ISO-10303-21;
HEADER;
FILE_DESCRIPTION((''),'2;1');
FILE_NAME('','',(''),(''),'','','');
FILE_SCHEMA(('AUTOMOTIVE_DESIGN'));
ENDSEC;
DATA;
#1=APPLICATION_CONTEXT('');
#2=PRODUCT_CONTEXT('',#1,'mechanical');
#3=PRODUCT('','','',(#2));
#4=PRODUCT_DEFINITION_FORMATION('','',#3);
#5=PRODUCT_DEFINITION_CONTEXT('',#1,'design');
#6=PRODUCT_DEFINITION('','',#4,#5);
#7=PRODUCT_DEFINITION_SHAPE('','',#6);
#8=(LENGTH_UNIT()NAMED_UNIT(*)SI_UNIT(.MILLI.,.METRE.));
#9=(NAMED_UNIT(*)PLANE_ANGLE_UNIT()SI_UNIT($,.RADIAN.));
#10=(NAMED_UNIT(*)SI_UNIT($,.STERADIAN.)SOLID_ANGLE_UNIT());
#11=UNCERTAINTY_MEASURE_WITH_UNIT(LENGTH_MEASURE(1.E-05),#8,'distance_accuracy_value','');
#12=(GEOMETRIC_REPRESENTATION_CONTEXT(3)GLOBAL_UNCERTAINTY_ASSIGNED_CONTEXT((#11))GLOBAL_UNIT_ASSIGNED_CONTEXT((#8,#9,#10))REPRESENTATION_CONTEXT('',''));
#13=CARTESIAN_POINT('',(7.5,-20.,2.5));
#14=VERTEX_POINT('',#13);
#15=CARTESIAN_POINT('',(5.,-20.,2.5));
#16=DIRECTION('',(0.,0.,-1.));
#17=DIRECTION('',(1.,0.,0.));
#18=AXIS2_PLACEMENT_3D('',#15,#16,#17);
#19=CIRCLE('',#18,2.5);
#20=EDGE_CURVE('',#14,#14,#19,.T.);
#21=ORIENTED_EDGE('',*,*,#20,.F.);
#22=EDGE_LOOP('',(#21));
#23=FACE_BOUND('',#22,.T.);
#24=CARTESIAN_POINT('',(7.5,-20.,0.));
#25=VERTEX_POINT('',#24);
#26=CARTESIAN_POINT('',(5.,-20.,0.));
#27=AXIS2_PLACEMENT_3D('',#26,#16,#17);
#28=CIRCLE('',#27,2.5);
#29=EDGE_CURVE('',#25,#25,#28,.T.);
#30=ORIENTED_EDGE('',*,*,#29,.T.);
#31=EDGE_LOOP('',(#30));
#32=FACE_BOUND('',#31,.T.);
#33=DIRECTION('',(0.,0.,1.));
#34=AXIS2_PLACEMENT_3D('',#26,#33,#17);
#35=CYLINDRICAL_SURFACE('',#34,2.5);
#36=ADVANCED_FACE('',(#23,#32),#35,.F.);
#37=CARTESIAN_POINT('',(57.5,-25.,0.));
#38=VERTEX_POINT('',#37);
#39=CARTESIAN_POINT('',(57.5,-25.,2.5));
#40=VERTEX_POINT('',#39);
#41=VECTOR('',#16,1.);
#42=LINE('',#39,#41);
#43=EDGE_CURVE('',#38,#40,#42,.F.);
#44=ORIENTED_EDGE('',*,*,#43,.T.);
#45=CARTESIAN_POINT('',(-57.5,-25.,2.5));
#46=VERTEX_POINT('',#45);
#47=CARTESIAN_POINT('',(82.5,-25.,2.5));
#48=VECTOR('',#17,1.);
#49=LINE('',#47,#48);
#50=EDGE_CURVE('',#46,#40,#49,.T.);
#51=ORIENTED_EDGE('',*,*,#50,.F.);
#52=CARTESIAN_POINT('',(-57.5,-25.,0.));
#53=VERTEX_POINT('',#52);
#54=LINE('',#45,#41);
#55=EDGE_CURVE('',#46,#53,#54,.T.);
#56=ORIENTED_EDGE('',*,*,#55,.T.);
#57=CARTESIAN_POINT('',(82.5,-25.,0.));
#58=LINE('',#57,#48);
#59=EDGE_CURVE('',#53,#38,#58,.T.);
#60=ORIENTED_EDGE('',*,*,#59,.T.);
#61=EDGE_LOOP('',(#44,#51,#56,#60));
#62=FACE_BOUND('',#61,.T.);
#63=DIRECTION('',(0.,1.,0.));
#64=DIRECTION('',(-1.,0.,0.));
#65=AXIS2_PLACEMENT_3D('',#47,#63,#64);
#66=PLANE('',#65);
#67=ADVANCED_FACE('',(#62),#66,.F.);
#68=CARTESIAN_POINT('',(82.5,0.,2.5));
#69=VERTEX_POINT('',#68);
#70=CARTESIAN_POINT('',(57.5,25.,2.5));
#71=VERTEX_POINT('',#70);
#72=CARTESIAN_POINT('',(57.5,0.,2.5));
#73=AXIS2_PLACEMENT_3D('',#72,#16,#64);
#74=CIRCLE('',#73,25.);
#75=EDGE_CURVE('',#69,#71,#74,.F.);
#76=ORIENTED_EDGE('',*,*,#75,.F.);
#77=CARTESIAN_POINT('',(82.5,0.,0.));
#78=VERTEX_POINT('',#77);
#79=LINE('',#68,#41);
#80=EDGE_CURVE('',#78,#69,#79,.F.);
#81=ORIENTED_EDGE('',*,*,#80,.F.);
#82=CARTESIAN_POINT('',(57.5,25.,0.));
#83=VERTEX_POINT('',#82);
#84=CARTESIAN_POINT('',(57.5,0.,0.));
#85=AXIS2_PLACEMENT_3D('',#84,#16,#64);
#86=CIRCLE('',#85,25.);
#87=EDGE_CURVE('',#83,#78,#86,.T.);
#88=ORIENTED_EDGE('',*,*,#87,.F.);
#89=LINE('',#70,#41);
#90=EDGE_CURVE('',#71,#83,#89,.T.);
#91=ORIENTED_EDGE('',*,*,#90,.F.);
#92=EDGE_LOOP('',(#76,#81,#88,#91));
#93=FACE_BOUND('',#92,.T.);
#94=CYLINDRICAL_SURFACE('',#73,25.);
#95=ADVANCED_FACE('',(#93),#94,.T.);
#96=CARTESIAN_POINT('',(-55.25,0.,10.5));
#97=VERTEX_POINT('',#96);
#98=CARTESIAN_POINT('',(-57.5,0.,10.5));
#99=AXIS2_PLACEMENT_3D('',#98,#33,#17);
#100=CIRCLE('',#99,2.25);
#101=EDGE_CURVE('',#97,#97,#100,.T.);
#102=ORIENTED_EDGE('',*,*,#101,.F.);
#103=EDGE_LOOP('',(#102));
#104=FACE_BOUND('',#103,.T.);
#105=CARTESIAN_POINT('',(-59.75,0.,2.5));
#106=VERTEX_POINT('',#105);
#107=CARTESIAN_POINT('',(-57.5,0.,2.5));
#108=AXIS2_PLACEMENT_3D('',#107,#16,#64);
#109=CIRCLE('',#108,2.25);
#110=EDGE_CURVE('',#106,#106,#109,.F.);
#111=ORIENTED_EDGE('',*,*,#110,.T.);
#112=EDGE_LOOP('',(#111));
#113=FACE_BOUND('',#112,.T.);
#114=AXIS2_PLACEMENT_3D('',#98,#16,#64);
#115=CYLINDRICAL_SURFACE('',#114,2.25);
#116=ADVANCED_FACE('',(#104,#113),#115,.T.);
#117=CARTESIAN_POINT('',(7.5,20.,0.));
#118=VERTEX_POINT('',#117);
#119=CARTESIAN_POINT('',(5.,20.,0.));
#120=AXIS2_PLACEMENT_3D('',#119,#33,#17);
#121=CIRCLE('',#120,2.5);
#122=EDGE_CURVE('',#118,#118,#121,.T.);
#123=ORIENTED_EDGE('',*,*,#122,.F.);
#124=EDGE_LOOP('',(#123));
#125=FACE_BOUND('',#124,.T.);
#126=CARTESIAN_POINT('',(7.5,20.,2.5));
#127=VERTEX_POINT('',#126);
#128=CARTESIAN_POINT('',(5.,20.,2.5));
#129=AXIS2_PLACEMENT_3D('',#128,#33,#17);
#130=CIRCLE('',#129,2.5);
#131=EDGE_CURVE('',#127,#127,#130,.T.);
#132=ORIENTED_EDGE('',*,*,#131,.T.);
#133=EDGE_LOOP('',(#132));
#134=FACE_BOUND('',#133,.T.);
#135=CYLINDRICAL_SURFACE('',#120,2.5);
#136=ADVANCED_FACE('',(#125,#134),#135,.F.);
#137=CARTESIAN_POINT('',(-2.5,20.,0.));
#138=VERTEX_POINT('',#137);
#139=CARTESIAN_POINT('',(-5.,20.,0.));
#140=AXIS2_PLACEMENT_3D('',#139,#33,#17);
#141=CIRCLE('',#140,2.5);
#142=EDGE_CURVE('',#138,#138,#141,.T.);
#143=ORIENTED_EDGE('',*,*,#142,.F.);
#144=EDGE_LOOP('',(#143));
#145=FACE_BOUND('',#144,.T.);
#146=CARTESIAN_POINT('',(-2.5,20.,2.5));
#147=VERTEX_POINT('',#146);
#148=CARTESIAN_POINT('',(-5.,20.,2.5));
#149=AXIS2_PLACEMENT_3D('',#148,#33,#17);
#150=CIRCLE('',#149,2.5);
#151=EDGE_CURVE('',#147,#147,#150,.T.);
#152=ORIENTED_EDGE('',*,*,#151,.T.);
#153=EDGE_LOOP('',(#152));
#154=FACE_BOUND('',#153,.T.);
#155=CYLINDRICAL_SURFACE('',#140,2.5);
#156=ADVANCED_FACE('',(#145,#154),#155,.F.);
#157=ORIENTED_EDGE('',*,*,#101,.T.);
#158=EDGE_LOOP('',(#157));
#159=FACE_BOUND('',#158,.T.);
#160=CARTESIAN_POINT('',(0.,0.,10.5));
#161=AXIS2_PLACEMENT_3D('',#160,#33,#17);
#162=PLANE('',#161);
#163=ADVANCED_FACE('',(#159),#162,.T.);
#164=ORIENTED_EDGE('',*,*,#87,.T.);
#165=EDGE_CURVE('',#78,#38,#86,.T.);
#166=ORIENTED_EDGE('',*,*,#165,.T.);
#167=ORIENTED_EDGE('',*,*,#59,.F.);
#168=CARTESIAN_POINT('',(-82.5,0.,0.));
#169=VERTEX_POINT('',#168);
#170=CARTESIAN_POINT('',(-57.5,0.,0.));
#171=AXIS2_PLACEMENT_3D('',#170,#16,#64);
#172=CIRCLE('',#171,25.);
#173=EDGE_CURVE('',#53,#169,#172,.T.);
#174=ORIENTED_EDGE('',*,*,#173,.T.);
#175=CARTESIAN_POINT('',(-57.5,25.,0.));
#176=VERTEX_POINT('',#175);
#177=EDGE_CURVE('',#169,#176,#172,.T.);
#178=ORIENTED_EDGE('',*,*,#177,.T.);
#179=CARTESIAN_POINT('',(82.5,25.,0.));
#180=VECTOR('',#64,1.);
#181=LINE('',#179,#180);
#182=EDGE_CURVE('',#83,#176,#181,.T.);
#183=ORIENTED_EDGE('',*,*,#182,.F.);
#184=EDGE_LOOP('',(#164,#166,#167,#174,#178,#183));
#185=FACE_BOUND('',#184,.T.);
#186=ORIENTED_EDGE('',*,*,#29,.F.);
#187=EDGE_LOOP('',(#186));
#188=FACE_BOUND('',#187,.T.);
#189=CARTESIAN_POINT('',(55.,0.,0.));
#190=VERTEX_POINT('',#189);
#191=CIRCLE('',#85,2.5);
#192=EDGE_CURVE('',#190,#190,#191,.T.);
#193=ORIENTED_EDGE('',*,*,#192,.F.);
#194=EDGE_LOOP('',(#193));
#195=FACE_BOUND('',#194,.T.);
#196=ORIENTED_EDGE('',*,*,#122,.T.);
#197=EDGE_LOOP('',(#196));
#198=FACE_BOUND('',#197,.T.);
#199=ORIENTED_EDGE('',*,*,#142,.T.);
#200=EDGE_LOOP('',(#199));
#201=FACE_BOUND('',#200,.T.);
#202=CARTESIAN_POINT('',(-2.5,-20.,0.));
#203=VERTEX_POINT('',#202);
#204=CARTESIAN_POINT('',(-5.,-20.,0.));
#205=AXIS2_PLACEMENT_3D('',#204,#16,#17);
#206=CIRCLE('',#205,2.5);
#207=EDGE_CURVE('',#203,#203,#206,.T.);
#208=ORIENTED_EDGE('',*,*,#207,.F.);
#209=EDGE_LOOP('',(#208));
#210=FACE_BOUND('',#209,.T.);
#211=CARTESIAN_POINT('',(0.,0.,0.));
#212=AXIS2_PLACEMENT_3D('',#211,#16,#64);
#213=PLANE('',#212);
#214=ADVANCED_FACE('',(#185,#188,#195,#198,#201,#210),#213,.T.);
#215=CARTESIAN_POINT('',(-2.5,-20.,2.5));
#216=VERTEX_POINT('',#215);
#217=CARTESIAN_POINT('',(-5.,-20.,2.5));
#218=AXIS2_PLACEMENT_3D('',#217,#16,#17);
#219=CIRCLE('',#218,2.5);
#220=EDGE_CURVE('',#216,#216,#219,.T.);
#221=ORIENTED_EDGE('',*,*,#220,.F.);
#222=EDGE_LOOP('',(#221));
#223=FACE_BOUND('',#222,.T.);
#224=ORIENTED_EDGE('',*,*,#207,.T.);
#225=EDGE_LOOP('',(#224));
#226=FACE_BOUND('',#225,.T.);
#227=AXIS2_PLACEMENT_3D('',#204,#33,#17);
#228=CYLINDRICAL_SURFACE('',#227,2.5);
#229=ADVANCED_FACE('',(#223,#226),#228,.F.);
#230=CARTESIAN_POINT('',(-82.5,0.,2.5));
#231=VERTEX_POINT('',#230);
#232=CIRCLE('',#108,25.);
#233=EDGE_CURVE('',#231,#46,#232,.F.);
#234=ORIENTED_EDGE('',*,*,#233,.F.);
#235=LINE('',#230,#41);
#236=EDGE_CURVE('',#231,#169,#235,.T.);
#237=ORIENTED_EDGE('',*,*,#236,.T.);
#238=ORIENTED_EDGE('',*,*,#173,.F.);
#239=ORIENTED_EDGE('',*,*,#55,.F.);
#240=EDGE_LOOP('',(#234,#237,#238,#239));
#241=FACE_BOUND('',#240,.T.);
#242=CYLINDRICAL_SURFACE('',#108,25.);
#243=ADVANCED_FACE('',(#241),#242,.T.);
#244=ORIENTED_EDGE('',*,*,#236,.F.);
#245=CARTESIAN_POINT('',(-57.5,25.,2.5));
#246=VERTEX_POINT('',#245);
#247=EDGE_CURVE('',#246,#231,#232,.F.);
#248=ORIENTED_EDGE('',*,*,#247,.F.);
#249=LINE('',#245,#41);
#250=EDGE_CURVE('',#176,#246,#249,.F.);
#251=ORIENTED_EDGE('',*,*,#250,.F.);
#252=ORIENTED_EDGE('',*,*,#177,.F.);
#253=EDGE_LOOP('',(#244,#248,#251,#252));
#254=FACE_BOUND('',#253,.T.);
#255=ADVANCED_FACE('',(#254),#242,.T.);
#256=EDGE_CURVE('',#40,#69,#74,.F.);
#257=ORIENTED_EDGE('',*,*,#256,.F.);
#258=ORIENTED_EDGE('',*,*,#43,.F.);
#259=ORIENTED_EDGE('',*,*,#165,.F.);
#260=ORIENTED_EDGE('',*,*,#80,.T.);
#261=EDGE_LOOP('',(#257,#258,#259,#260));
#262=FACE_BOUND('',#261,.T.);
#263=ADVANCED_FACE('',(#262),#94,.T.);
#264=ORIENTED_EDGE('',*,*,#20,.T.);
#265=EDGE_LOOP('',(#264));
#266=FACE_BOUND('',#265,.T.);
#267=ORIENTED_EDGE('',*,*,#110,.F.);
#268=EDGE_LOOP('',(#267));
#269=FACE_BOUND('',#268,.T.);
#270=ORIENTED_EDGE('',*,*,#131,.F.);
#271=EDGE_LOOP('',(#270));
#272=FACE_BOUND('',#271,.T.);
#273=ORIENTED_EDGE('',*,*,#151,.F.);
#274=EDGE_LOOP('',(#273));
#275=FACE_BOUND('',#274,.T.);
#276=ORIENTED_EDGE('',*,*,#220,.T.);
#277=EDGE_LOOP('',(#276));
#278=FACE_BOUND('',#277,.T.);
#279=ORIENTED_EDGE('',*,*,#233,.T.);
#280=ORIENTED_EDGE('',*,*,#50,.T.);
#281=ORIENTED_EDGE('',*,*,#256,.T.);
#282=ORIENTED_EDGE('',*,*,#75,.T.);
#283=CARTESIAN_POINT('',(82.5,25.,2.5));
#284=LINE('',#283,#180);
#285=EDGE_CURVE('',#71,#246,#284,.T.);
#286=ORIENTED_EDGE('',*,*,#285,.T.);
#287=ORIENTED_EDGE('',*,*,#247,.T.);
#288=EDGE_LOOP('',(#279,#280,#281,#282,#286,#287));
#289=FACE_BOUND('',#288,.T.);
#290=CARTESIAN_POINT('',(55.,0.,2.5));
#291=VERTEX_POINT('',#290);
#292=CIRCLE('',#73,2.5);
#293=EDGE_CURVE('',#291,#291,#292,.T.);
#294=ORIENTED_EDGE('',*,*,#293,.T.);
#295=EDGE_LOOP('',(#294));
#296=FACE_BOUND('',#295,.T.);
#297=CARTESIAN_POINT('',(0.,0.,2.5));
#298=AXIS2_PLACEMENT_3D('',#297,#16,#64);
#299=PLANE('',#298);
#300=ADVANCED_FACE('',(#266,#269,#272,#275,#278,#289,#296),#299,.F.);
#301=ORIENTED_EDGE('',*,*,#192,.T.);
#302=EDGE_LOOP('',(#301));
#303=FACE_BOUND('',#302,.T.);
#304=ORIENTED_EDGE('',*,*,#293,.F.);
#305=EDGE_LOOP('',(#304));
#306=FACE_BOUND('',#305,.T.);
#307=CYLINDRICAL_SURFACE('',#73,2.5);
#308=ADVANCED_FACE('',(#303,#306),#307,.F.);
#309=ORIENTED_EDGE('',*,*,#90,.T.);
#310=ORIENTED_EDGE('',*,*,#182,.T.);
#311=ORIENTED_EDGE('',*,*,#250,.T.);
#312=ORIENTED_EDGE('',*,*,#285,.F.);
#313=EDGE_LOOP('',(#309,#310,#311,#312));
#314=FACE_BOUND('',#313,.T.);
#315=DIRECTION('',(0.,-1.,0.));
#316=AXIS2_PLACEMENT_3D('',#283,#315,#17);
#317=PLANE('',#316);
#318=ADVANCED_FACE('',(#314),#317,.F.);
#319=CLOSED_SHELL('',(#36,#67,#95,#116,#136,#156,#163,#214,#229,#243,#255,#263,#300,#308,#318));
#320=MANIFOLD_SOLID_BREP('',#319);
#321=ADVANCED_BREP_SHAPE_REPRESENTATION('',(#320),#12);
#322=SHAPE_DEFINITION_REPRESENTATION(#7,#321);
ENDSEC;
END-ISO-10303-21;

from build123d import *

# Parameters (mm, degrees)
SKETCH1_W           = 165
SKETCH1_H           = 50
BOSS_EXTRUDE1_DEPTH = 2.5
FILLET1_R           = 25
SKETCH2_R           = 2.5
CUT_EXTRUDE1_DEPTH  = 2.5
SKETCH3_R           = 2.5
CUT_EXTRUDE2_DEPTH  = 2.5
SKETCH4_R           = 2.25
BOSS_EXTRUDE2_DEPTH = 8


with BuildPart() as part:
    # Sketch1 → Boss-Extrude1 (new body)
    with BuildSketch(Plane.XY):
        Rectangle(SKETCH1_W, SKETCH1_H)
    extrude(amount=BOSS_EXTRUDE1_DEPTH)

    # Fillet1
    fillet1_edges = [part.edges().sort_by_distance(p)[0] for p in [
        (-82.5, -25, 1.25),
        (-82.5, 25, 1.25),
        (82.5, -25, 1.25),
        (82.5, 25, 1.25),
    ]]
    fillet(fillet1_edges, radius=FILLET1_R - 0.0001)  # a hair under: the kernel refuses the full size

    # Sketch2 → Cut-Extrude1 (cut)
    with BuildSketch(Plane.XY.offset(2.5)):
        with Locations((-5, 20)):
            Circle(SKETCH2_R)
        with Locations((5, 20)):
            Circle(SKETCH2_R)
    cut_extrude1 = extrude(amount=-CUT_EXTRUDE1_DEPTH, mode=Mode.SUBTRACT)

    # Mirror1: Cut-Extrude1 across plane
    add(cut_extrude1.mirror(Plane.ZX), mode=Mode.SUBTRACT)

    # Sketch3 → Cut-Extrude2 (cut)
    with BuildSketch(Plane(origin=(0, 0, 0), x_dir=(-1, 0, 0), z_dir=(0, 0, -1))):
        with Locations((-57.5, 0)):
            Circle(SKETCH3_R)
    extrude(amount=-CUT_EXTRUDE2_DEPTH, mode=Mode.SUBTRACT)

    # Sketch4 → Boss-Extrude2 (add)
    with BuildSketch(Plane.XY.offset(2.5)):
        with Locations(Location((-57.5, 0, 0), (0, 0, 180))):
            Circle(SKETCH4_R)
    extrude(amount=BOSS_EXTRUDE2_DEPTH)


solid = part.part
